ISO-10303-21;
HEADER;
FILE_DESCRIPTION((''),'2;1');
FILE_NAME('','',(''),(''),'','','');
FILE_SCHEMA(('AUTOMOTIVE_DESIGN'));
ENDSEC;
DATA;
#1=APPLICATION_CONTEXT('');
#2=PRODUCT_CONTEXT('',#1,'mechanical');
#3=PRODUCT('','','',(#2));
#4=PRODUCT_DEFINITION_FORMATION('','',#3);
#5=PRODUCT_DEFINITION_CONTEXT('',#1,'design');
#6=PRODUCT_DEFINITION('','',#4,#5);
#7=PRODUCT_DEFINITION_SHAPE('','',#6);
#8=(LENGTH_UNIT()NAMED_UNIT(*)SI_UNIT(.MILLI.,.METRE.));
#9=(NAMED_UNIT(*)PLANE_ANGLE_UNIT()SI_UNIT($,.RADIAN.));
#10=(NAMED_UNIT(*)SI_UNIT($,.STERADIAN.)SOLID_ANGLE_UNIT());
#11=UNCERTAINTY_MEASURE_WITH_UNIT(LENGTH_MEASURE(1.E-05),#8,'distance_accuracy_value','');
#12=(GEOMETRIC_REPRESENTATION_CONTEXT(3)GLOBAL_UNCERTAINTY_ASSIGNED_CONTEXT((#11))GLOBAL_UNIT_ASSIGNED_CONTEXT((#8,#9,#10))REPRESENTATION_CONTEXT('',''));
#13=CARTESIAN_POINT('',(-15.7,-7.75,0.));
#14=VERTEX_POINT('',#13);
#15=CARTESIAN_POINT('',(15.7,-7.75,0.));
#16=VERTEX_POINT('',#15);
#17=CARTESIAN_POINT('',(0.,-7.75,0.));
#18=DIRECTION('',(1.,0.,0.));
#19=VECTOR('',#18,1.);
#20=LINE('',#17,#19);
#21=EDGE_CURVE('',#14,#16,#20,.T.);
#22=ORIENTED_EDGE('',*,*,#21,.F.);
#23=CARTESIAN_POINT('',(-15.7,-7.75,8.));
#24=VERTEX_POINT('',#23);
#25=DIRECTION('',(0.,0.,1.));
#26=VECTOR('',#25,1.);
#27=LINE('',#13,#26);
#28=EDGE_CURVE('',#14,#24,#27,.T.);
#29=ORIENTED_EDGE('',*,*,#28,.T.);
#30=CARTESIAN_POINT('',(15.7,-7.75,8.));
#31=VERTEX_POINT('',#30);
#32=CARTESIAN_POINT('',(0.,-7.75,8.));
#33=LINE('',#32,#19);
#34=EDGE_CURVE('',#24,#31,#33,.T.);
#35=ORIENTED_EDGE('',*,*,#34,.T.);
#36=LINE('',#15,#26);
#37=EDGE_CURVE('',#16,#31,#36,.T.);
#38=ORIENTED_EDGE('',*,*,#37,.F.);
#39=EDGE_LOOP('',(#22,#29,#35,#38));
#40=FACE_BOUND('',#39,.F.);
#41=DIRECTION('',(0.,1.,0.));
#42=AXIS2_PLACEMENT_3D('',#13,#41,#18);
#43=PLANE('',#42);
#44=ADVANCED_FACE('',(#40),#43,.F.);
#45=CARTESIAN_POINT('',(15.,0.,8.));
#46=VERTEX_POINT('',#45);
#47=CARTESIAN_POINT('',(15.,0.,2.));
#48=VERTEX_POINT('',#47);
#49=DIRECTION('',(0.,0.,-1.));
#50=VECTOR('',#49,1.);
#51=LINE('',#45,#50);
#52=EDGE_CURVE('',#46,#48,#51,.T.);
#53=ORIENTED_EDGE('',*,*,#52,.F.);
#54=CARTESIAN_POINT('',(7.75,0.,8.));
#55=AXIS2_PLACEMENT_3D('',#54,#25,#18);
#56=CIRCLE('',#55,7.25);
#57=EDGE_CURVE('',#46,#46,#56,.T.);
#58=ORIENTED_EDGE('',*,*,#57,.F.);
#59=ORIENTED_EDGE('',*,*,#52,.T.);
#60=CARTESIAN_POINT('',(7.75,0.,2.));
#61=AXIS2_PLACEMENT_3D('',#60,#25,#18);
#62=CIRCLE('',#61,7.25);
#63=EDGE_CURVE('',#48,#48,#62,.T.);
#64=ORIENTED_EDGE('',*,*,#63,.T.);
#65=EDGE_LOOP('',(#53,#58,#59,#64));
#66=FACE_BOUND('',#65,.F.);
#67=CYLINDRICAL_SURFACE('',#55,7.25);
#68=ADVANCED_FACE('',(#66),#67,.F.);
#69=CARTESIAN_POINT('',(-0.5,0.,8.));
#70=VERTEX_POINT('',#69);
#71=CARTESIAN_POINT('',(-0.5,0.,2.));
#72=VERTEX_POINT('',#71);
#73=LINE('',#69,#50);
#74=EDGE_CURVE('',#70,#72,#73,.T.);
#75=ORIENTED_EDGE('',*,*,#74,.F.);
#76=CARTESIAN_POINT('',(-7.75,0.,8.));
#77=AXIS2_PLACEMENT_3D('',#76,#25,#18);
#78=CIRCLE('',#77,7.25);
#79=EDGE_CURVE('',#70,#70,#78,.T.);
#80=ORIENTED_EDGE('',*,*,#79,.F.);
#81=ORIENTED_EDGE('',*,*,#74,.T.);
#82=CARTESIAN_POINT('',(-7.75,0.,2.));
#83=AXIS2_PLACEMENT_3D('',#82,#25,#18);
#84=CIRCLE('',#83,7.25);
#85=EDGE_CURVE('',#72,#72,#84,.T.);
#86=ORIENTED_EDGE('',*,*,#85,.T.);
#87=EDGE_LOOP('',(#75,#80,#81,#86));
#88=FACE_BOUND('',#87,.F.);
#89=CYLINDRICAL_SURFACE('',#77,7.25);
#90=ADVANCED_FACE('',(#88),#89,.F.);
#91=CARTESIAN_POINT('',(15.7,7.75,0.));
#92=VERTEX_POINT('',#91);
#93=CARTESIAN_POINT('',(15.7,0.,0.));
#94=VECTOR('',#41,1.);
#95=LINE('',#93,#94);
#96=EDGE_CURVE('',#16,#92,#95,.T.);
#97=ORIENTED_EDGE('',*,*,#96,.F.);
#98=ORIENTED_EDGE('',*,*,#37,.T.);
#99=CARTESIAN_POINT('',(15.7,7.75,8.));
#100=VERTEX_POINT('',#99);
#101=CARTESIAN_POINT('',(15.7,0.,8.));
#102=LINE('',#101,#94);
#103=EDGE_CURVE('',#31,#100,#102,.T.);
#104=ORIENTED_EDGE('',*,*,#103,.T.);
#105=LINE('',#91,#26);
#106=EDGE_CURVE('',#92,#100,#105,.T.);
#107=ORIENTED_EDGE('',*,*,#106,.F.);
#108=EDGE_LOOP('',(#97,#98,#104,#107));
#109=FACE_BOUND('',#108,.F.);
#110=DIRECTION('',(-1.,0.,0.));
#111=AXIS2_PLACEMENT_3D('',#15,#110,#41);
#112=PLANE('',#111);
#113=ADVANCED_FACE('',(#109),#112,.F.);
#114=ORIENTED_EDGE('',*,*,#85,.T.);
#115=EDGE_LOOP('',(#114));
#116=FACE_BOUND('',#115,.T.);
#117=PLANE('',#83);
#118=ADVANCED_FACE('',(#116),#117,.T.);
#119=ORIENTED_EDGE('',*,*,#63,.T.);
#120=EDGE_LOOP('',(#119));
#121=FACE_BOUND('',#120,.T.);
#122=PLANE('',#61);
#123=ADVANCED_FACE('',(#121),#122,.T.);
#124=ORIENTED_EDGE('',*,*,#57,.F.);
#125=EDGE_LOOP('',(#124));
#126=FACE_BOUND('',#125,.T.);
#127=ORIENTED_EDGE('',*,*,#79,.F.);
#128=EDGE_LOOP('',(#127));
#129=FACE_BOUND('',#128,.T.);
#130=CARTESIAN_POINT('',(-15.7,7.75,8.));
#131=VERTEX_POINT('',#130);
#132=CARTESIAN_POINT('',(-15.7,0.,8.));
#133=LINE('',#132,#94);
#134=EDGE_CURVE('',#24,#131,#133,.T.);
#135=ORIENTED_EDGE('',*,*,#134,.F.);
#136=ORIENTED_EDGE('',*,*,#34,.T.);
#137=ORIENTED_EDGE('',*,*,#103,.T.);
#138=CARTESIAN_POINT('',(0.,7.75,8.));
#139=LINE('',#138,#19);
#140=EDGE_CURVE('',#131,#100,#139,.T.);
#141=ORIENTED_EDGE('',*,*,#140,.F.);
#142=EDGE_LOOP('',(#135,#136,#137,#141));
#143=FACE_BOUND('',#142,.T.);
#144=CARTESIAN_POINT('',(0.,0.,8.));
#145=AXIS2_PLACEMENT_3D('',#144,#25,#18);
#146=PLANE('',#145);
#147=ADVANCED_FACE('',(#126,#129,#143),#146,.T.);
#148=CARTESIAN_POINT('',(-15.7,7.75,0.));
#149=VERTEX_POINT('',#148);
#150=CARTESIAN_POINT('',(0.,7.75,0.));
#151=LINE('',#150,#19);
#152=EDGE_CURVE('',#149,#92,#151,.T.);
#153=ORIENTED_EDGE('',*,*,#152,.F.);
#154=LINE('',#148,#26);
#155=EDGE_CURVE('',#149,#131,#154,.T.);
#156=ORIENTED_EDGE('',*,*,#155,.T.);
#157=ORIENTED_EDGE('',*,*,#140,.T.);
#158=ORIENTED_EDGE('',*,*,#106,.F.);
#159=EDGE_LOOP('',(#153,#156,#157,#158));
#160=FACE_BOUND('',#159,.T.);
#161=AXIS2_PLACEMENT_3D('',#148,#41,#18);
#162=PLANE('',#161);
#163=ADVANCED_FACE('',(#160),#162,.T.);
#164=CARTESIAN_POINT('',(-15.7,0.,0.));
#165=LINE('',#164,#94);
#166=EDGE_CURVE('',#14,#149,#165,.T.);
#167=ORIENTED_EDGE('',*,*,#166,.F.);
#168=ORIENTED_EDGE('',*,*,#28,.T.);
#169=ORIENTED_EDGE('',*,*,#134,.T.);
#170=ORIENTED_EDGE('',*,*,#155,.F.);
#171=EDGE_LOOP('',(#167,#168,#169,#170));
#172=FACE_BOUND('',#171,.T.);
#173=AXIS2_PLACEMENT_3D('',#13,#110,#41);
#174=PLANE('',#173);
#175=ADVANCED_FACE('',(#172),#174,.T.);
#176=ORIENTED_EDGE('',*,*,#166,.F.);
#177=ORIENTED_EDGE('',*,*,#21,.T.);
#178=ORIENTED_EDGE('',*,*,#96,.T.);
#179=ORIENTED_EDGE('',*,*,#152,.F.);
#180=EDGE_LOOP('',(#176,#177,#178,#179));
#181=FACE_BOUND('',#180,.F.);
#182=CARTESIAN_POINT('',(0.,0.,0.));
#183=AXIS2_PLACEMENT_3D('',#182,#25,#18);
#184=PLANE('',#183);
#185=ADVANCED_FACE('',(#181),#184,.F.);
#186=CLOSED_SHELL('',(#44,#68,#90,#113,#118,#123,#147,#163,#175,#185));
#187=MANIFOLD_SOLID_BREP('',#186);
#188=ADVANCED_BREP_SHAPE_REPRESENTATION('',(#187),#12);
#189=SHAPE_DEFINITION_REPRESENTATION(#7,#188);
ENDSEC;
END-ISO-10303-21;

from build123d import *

# Parameters (mm, degrees)
F2_W     = 31.4
F2_H     = 15.5
F3_DEPTH = 8
F4_R     = 7.25
F5_DEPTH = 6


# Not quite as in the source:
# - a feature names something its author has since deleted; it is built from what else it names


with BuildPart() as f3:
    # F2 (on Top) → F3 (new body)
    with BuildSketch(Plane.XY):
        Rectangle(F2_W, F2_H)
    extrude(amount=F3_DEPTH)

    # F4 (on face) → F5 (cut)
    with BuildSketch(Plane.XY.offset(8)):
        with Locations((-7.75, 0)):
            Circle(F4_R)
        with Locations((7.75, 0)):
            Circle(F4_R)
    extrude(amount=-F5_DEPTH, mode=Mode.SUBTRACT)


solid = f3.part
